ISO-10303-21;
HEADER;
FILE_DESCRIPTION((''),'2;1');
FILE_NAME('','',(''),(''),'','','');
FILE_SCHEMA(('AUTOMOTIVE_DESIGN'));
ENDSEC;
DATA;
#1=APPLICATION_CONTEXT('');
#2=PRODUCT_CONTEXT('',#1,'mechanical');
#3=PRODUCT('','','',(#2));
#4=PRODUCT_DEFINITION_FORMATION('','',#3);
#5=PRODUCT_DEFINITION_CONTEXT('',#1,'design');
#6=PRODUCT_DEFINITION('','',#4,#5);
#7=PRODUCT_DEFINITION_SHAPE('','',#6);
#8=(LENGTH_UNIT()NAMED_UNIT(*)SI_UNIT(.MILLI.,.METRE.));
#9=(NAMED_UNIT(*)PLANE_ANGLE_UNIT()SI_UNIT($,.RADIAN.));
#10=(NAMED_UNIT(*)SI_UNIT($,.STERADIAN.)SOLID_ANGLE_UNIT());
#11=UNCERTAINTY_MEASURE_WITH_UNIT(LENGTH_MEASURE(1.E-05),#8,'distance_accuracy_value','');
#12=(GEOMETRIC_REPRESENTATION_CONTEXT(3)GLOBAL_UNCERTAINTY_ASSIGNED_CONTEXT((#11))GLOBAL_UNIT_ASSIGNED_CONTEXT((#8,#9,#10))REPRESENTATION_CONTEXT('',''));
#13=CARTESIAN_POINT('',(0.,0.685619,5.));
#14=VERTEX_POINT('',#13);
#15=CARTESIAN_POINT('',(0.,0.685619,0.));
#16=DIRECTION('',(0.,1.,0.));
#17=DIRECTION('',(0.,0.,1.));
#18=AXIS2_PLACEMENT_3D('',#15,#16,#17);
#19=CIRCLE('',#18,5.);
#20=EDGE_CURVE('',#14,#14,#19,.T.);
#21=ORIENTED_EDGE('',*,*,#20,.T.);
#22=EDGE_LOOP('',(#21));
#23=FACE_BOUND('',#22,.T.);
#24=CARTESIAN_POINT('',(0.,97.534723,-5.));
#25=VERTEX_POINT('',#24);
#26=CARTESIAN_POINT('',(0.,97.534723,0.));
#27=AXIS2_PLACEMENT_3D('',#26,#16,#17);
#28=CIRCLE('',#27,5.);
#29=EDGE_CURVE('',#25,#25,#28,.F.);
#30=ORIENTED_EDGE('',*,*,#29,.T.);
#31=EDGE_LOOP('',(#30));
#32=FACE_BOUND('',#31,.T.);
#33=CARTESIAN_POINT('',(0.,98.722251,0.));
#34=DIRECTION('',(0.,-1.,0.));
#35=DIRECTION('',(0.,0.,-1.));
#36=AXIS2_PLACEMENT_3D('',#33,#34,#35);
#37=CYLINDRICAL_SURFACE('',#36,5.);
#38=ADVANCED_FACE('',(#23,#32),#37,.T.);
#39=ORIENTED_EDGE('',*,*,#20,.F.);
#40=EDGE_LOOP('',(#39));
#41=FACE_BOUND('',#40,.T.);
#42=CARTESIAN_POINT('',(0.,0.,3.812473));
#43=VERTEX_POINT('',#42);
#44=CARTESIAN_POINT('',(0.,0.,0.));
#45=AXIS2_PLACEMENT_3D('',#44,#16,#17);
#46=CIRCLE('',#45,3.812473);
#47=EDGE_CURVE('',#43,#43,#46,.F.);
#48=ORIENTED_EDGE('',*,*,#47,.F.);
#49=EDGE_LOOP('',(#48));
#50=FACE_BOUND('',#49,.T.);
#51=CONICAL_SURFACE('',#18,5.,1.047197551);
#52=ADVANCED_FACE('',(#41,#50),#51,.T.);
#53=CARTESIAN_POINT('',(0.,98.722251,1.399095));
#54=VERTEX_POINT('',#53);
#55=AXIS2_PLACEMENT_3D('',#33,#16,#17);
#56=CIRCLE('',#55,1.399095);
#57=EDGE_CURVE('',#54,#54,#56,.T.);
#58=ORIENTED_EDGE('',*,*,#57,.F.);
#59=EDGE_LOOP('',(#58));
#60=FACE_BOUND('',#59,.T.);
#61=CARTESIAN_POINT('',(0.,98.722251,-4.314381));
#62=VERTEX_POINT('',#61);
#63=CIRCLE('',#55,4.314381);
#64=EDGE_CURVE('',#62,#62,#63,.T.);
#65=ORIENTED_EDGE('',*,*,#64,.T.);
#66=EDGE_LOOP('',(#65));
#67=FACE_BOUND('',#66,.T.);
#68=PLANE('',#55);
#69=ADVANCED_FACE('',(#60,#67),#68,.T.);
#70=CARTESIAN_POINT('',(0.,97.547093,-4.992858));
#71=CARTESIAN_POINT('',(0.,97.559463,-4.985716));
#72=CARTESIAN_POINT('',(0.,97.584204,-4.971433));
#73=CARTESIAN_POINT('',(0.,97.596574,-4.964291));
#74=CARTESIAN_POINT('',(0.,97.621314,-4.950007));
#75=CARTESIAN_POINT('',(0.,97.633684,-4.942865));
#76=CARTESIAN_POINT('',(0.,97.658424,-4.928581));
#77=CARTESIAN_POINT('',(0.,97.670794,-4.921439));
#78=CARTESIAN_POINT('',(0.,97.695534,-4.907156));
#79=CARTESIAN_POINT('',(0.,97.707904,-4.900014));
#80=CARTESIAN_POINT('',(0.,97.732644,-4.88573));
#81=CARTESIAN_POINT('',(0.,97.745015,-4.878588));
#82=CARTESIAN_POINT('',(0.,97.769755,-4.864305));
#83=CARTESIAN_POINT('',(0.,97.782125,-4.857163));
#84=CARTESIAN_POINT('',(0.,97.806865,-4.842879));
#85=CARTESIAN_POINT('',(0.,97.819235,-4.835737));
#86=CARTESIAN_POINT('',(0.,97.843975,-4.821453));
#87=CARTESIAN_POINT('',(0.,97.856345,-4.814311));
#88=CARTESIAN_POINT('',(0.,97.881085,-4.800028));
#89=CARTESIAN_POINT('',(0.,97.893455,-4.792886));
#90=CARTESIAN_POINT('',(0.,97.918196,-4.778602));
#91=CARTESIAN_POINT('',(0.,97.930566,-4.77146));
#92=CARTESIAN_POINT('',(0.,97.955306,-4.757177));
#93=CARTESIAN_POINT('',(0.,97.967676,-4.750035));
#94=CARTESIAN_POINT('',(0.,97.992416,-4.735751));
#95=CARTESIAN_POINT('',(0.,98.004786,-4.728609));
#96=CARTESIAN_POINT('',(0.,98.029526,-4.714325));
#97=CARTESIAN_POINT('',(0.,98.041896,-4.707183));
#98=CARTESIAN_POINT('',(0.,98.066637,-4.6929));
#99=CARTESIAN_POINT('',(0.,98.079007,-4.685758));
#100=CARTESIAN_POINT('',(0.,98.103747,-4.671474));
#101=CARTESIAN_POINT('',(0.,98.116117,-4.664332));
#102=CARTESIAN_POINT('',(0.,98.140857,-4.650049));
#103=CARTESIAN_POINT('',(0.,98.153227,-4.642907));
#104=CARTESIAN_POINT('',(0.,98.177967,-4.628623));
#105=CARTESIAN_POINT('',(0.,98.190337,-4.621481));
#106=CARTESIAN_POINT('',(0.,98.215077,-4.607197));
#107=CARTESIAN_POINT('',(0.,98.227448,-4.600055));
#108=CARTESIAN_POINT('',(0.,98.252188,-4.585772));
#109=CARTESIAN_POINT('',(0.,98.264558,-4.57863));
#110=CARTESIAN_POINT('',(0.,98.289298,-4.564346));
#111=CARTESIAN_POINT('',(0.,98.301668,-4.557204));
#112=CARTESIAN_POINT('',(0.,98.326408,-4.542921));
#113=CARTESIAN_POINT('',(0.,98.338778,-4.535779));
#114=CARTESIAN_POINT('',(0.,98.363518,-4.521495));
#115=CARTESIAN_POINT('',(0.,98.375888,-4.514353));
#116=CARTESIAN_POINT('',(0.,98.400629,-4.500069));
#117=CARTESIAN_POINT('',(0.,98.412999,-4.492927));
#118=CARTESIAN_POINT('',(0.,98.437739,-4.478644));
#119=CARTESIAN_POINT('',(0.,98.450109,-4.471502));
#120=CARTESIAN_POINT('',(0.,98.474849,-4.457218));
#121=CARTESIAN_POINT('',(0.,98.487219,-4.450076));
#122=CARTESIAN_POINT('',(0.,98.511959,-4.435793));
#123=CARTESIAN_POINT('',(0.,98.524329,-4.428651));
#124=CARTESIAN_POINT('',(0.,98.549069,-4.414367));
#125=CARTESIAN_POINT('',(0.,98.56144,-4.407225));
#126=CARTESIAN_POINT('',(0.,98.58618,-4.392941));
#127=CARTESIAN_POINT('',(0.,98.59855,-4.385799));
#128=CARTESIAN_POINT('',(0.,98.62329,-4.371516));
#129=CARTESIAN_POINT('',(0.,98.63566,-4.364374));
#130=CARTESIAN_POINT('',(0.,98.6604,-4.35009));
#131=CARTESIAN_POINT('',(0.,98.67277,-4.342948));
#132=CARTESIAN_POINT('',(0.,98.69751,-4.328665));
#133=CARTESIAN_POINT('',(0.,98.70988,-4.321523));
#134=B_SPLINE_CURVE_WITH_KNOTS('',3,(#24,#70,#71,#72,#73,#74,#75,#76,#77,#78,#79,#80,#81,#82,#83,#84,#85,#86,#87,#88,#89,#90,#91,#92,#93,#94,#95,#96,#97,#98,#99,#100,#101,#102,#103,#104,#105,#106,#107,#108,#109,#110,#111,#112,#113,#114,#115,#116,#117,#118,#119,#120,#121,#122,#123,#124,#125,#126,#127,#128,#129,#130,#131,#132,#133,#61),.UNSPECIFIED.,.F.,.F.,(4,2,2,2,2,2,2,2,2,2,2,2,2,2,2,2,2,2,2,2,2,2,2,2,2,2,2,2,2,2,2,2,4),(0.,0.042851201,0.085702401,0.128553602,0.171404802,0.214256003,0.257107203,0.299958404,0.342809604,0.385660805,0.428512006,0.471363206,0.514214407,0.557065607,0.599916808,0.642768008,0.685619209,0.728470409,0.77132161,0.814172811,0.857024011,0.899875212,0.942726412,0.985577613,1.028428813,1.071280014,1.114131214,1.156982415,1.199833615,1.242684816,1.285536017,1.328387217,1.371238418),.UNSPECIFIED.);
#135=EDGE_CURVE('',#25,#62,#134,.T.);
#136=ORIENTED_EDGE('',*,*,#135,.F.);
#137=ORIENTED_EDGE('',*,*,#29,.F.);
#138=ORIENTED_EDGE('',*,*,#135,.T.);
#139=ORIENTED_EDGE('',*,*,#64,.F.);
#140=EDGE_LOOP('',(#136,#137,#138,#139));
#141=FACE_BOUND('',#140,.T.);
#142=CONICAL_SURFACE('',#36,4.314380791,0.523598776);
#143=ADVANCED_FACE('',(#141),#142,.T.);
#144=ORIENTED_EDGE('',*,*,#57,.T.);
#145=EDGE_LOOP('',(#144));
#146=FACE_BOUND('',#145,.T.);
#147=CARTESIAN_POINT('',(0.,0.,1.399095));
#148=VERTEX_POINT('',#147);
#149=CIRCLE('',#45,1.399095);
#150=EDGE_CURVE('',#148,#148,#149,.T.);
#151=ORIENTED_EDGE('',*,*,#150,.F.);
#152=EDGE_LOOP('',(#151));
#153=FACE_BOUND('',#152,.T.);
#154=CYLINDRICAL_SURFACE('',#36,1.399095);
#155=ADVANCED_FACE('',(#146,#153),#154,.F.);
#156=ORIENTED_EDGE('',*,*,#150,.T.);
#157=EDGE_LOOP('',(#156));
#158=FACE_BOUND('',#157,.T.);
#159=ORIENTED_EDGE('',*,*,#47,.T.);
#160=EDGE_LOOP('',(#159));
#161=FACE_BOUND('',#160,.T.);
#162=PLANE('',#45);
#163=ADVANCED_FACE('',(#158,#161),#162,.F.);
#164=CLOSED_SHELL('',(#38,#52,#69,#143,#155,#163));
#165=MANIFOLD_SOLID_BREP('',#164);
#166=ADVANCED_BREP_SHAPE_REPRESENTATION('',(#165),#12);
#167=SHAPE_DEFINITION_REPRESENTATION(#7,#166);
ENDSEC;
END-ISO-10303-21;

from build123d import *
from OCP.BRepFilletAPI import BRepFilletAPI_MakeChamfer

# Parameters (mm, degrees)
SKETCH1_R           = 5
BOSS_EXTRUDE1_DEPTH = 98.722250548
SKETCH2_R           = 1.399094723
CUT_EXTRUDE1_DEPTH  = 99.975162305
CHAMFER1_SIZE       = 1.187527304
CHAMFER1_SIZE2      = 0.685619209


with BuildPart() as part:
    # Sketch1 → Boss-Extrude1 (new body)
    with BuildSketch(Plane(origin=(0, 0, 0), x_dir=(1, 0, 0), z_dir=(0, 1, 0))):
        Circle(SKETCH1_R)
    extrude(amount=BOSS_EXTRUDE1_DEPTH)

    # Sketch2 → Cut-Extrude1 (cut, through all)
    with BuildSketch(Plane(origin=(0, 0, 0), x_dir=(1, 0, 0), z_dir=(0, 1, 0))):
        Circle(SKETCH2_R)
    extrude(amount=CUT_EXTRUDE1_DEPTH, mode=Mode.SUBTRACT)

    # Chamfer1: one chamfer whose edges measure the first distance from different faces: ONE call of the kernel's chamfer builder (chamfer() names one face for all edges)
    chamfer1_edges_1 = [part.edges().sort_by_distance(p)[0] for p in [
        (-5, 98.722250548, 0),
    ]]
    chamfer1_side_1 = [part.faces().sort_by_distance(p)[0] for p in [
        (-5, 49.361125274, 0),
    ]]
    chamfer1_edges_2 = [part.edges().sort_by_distance(p)[0] for p in [
        (-5, 0, 0),
    ]]
    chamfer1_side_2 = [part.faces().sort_by_distance(p)[0] for p in [
        (-4.858578644, 0, 0),
    ]]
    chamfer1 = BRepFilletAPI_MakeChamfer(part.part.solid().wrapped)
    for e in chamfer1_edges_1:
        chamfer1.Add(CHAMFER1_SIZE, CHAMFER1_SIZE2, e.wrapped, chamfer1_side_1[0].wrapped)  # the first distance lies on this face
    for e in chamfer1_edges_2:
        chamfer1.Add(CHAMFER1_SIZE, CHAMFER1_SIZE2, e.wrapped, chamfer1_side_2[0].wrapped)  # the first distance lies on this face
    add(Compound.cast(chamfer1.Shape()), mode=Mode.REPLACE)


solid = part.part
